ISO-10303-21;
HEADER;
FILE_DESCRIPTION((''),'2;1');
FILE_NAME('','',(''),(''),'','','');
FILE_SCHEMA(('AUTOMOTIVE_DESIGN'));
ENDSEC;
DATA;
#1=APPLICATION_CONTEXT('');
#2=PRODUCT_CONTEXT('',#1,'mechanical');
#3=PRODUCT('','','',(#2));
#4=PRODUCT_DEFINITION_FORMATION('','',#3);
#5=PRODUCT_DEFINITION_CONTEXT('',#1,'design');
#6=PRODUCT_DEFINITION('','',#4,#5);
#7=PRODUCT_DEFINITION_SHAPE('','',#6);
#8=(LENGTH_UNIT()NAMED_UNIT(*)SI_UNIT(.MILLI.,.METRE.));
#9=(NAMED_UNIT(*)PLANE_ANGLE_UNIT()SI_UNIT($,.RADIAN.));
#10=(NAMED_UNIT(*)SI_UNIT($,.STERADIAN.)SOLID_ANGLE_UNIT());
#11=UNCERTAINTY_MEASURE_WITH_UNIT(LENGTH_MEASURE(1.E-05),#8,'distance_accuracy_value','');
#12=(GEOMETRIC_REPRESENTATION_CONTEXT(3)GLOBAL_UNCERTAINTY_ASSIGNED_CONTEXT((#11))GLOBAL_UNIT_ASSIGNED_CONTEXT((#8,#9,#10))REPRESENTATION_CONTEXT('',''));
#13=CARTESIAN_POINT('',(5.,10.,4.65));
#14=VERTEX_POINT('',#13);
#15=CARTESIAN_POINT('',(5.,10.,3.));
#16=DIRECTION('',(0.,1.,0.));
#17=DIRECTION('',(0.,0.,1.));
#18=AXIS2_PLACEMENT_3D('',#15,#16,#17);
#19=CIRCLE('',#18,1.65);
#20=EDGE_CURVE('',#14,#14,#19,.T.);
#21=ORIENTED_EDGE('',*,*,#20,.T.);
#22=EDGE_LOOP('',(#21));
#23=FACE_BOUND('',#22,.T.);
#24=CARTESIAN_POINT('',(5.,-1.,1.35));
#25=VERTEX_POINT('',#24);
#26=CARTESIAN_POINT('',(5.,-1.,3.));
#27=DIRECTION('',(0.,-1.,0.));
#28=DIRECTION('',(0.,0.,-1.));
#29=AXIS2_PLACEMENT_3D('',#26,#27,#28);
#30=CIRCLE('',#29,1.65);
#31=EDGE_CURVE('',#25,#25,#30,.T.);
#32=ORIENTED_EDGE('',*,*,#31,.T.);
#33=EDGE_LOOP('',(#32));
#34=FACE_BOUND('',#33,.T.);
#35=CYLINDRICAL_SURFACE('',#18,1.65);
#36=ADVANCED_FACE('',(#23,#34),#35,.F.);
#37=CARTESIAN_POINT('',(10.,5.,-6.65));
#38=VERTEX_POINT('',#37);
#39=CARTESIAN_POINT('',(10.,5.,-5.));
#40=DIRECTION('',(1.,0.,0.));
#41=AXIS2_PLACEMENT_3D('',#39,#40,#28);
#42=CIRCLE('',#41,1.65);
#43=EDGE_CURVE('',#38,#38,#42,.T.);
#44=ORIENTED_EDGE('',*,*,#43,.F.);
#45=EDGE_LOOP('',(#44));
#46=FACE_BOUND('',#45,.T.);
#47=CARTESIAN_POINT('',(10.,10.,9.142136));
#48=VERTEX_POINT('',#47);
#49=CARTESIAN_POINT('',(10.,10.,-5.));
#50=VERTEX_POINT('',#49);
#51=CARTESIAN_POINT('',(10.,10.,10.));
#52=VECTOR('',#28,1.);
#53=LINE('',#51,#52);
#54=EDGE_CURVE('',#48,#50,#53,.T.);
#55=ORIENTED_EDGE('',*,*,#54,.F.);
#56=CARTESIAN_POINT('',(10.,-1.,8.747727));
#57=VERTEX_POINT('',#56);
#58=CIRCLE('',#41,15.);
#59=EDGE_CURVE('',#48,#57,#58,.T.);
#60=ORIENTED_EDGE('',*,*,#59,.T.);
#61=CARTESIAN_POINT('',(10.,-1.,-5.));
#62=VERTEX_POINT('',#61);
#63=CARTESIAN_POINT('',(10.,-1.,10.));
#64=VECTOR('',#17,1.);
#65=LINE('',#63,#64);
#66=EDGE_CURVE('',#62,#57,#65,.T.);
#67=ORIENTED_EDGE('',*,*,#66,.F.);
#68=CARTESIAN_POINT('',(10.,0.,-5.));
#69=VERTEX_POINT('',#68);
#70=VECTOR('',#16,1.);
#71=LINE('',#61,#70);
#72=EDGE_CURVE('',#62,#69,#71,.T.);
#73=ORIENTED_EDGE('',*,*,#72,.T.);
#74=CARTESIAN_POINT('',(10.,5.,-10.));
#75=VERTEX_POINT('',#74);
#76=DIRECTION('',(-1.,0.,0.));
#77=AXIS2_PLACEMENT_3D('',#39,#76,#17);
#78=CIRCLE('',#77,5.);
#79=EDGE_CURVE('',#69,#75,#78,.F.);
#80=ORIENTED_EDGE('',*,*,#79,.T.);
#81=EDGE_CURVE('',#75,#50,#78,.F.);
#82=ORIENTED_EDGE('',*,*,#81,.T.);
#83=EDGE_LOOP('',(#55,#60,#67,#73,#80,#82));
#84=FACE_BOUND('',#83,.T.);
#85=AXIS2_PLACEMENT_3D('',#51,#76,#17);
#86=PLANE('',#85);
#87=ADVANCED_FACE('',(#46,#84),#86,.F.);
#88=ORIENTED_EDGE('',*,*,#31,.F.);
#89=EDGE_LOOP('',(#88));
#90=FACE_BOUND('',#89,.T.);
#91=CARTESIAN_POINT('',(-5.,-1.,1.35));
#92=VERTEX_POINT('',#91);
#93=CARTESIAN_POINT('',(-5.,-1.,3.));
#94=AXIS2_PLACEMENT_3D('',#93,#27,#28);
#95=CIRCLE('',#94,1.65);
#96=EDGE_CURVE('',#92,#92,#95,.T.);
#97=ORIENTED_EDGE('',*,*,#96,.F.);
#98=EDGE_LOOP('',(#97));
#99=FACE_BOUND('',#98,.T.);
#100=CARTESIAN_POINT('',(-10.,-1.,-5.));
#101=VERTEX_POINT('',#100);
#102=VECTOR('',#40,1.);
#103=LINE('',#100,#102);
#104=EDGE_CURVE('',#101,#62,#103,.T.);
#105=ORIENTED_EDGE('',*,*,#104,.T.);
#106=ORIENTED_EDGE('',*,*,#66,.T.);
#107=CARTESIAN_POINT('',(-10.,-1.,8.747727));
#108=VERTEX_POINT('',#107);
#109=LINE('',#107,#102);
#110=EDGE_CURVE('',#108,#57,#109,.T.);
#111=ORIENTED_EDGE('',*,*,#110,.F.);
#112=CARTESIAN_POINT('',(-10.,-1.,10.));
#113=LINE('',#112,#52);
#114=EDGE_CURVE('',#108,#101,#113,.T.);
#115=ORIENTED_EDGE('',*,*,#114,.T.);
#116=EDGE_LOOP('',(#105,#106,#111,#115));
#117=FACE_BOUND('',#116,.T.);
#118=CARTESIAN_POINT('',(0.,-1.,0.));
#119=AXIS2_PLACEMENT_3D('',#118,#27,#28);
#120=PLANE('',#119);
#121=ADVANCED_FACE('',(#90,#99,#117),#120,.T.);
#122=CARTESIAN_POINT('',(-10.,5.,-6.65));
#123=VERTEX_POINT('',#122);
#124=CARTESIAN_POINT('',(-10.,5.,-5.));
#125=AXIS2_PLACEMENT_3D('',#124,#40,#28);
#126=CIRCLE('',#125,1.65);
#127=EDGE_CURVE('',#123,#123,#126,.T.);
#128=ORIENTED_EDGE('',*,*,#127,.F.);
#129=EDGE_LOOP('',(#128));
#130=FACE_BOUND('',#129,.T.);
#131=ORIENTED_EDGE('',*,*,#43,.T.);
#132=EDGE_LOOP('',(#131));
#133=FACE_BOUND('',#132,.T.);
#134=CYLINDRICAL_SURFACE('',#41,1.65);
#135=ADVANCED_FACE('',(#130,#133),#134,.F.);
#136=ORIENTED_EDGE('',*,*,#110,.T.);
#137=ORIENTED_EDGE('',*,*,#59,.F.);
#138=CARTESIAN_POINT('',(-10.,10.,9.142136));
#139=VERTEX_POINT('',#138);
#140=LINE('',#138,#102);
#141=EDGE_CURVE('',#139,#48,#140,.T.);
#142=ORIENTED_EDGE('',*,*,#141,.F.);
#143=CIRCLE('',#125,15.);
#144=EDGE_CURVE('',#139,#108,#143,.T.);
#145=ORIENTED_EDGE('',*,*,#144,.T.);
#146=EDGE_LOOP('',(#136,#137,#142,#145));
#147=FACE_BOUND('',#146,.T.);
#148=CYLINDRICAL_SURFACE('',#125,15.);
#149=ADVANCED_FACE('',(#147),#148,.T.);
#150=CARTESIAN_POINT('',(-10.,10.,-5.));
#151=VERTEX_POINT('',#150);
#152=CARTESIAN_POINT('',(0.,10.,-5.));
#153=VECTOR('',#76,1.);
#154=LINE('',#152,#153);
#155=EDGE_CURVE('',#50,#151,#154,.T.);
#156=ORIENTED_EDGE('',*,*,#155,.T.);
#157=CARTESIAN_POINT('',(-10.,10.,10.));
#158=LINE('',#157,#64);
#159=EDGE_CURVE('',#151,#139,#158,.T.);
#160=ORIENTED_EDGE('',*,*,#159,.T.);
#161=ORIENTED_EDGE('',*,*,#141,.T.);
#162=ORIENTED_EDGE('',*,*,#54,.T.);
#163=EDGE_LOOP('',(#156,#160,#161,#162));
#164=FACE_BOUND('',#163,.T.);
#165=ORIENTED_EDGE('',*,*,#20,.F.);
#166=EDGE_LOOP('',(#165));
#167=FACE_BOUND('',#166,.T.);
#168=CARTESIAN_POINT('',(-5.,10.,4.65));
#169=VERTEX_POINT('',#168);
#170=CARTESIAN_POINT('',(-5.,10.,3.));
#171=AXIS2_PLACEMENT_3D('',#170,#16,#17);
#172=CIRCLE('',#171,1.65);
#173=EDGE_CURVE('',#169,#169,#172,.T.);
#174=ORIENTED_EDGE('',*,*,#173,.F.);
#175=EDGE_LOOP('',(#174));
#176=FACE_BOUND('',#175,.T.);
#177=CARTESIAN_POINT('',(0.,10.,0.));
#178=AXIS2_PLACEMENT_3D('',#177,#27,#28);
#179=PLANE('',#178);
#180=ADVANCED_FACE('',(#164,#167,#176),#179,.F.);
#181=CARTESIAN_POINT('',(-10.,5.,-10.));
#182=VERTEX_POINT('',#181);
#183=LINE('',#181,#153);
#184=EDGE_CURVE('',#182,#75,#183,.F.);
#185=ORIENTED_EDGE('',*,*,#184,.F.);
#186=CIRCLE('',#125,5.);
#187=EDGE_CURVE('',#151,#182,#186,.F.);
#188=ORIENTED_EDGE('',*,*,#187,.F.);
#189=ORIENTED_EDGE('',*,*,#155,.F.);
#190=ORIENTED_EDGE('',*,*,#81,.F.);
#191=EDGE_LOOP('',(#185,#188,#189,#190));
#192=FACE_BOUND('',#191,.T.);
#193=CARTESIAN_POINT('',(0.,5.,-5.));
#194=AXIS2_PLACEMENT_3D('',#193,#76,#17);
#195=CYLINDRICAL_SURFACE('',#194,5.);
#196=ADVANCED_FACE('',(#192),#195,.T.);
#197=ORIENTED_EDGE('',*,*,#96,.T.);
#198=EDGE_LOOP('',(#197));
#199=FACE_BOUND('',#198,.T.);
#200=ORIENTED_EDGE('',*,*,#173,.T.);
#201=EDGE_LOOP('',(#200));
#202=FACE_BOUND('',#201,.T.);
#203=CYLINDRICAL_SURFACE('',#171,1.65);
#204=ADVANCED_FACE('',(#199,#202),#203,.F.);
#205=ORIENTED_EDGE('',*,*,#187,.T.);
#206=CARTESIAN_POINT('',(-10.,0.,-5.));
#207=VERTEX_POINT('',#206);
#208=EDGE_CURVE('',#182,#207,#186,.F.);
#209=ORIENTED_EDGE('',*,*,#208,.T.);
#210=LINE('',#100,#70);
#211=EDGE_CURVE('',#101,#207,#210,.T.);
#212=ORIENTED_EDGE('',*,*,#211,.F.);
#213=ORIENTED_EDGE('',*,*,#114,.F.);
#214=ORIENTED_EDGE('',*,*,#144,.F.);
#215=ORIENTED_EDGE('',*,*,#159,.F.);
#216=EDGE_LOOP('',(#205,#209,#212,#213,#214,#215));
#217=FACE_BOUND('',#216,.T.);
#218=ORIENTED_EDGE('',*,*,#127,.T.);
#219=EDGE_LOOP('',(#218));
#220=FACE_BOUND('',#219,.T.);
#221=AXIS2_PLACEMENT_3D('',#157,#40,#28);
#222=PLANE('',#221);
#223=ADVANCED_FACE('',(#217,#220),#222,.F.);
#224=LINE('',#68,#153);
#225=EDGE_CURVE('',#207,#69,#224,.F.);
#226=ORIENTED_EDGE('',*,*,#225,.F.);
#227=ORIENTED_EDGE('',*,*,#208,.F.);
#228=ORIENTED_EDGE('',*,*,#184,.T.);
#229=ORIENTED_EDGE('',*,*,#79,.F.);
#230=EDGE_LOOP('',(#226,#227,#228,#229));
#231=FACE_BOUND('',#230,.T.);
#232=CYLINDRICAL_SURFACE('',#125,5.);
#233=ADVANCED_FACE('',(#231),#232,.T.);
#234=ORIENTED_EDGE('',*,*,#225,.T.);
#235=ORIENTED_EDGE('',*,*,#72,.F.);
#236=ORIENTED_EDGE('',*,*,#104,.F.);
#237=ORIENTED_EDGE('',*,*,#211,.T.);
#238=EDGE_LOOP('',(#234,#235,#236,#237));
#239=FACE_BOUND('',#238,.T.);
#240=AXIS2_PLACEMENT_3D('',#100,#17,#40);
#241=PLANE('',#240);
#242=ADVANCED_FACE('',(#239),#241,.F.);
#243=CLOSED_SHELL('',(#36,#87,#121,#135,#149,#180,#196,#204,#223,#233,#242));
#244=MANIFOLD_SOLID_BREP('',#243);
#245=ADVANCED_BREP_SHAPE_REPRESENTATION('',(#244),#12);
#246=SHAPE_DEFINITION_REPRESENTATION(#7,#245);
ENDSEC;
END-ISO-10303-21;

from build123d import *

# Parameters (mm, degrees)
SKETCH1_W             = 20
SKETCH1_H             = 20
BOSS_EXTRUDE1_DEPTH   = 10
FILLET1_R             = 5
M4X0_7_TAPPED_HOLE1_D = 3.3
SKETCH14_W            = 20
SKETCH14_H            = 15
BOSS_EXTRUDE4_DEPTH   = 1
M4X0_7_TAPPED_HOLE2_D = 3.3
CUT_EXTRUDE1_DEPTH    = 25.494897428


with BuildPart() as part:
    # Sketch1 → Boss-Extrude1 (new body)
    with BuildSketch(Plane(origin=(0, 0, 0), x_dir=(1, 0, 0), z_dir=(0, 1, 0))):
        Rectangle(SKETCH1_W, SKETCH1_H)
    extrude(amount=BOSS_EXTRUDE1_DEPTH)

    # Fillet1
    fillet1_edges = [part.edges().sort_by_distance(p)[0] for p in [
        (0, 0, -10),
        (0, 10, -10),
    ]]
    fillet(fillet1_edges, radius=FILLET1_R - 0.0001)  # a hair under: the kernel refuses the full size

    # M4x0.7 Tapped Hole1 (through all)
    with Locations(Plane(origin=(10, 0, 0), x_dir=(0, 0, -1), z_dir=(1, 0, 0))):
        with Locations((5, 5)):
            Hole(M4X0_7_TAPPED_HOLE1_D / 2)

    # Sketch14 → Boss-Extrude4 (add)
    with BuildSketch(Plane.XZ):
        with Locations((0, 2.5)):
            Rectangle(SKETCH14_W, SKETCH14_H)
    extrude(amount=BOSS_EXTRUDE4_DEPTH)

    # M4x0.7 Tapped Hole2 (through all)
    with Locations(Plane(origin=(0, 10, 0), x_dir=(1, 0, 0), z_dir=(0, 1, 0))):
        with Locations((-5, -3), (5, -3)):
            Hole(M4X0_7_TAPPED_HOLE2_D / 2)

    # Sketch9 → Cut-Extrude1 (cut, through all)
    with BuildSketch(Plane(origin=(10, 0, 0), x_dir=(0, 0, -1), z_dir=(1, 0, 0))):
        with BuildLine():
            ThreePointArc((-10, 5), (-9.783978395, 7.536529681), (-9.142135624, 10))
            Line((-9.142135624, 10), (-10, 10))
            Line((-10, 10), (-10, 5))
        make_face()
        with BuildLine():
            Line((-10, 0), (-9.142135624, 0))
            ThreePointArc((-9.142135624, 0), (-9.783978395, 2.463470319), (-10, 5))
            Line((-10, 5), (-10, 0))
        make_face()
        with BuildLine():
            Line((-10, -1), (-8.747727085, -1))
            ThreePointArc((-8.747727085, -1), (-8.953892306, -0.503534276), (-9.142135624, 0))
            Line((-9.142135624, 0), (-10, 0))
            Line((-10, 0), (-10, -1))
        make_face()
    extrude(amount=-CUT_EXTRUDE1_DEPTH, mode=Mode.SUBTRACT)


solid = part.part
